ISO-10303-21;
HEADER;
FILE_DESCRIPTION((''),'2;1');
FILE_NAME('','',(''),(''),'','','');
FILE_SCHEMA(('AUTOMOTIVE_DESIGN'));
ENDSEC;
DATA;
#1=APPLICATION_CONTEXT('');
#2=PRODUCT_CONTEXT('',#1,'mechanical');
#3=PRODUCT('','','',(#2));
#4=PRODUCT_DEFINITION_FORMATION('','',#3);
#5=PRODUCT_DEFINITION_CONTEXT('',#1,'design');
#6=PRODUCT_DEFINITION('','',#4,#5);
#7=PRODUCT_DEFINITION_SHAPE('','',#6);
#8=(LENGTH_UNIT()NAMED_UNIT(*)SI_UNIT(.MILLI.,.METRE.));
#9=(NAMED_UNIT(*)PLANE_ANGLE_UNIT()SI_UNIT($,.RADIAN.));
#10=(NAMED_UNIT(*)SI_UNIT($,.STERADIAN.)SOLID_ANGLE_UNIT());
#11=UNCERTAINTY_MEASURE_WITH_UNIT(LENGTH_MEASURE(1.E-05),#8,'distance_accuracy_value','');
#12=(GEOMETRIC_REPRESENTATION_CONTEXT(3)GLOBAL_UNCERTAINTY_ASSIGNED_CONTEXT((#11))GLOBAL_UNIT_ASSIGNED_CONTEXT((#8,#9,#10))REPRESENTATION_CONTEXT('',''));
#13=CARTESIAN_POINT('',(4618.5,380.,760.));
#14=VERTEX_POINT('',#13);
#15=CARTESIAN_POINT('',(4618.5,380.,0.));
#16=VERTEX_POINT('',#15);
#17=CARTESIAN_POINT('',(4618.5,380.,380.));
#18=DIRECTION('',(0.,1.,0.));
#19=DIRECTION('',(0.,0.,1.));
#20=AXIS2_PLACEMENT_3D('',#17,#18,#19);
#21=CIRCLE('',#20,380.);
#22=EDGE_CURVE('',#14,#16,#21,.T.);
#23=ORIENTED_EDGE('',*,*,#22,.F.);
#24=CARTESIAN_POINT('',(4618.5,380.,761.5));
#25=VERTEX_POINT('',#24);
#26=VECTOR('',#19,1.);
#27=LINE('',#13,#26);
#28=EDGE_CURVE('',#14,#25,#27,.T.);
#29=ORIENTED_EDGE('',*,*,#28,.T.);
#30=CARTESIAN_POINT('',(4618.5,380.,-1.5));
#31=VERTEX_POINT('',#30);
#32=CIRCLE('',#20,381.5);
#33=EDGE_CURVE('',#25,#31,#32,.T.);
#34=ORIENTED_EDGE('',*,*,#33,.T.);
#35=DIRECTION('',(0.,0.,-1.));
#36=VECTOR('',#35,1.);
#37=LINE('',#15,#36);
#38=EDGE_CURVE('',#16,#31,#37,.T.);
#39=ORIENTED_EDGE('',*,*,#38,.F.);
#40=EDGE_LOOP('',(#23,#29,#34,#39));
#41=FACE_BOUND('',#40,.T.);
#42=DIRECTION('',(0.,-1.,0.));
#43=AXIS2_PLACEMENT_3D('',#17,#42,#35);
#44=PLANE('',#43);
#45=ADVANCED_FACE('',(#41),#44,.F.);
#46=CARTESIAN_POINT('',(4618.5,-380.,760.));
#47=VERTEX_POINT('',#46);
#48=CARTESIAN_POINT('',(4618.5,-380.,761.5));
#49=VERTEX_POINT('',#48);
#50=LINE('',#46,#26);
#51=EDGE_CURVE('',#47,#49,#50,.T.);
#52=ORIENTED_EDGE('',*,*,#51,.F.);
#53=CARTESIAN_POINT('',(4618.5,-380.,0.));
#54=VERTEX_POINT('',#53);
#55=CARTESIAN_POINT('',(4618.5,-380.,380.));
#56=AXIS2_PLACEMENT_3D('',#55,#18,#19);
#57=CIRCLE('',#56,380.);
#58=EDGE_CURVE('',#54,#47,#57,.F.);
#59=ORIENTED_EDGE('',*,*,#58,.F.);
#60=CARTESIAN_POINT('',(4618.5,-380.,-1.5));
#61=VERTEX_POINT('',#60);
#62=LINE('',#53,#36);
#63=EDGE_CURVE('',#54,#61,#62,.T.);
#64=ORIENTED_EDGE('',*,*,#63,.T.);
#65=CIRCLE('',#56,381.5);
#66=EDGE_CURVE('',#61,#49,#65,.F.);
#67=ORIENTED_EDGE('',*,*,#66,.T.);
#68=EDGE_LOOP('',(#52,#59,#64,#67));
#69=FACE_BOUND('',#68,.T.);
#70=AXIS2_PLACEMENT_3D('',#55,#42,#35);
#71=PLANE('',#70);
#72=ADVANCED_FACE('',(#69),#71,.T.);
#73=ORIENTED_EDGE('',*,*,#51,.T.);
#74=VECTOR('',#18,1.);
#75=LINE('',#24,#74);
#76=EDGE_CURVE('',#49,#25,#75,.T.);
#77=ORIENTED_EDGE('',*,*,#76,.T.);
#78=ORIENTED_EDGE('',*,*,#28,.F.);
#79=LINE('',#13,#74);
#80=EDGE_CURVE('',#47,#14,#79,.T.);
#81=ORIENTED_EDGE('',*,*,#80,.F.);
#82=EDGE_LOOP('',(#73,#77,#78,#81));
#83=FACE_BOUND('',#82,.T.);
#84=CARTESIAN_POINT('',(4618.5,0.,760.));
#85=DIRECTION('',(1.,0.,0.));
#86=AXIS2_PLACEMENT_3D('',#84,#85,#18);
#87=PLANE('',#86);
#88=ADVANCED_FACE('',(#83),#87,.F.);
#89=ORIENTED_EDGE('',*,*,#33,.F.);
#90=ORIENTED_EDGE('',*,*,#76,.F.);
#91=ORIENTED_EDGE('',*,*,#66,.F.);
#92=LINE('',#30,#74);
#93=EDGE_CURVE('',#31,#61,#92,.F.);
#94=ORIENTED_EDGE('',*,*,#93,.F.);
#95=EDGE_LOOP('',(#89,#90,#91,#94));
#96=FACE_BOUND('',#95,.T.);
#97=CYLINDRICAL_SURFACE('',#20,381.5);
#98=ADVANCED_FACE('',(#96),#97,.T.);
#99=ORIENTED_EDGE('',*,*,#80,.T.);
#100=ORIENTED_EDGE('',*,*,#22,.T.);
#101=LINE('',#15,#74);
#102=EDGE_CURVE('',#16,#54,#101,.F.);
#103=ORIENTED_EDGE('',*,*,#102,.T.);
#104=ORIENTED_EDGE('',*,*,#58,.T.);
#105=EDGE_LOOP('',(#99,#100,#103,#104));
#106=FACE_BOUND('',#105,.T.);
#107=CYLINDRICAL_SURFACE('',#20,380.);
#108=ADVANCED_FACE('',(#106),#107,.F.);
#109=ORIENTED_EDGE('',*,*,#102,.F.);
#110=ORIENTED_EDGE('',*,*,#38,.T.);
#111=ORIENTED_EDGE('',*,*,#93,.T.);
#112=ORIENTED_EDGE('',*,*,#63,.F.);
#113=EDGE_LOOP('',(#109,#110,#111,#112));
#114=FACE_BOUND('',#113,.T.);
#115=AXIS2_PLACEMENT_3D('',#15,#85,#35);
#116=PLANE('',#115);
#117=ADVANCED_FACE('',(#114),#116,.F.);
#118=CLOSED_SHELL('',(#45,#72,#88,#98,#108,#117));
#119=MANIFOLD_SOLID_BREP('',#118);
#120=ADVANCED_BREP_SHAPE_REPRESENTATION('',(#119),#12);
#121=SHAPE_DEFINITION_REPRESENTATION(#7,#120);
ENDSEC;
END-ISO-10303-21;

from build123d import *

# Parameters (mm, degrees)
SKETCH1_W          = 10000
SKETCH1_H          = 760
BASE_FLANGE1_DEPTH = 1.5
HEM2_START         = -380
HEM2_DEPTH         = 760
HEM2_2_DEPTH       = 760
SKETCH17_W         = 11222.895029189
SKETCH17_H         = 1018.315302658
CUT_EXTRUDE2_DEPTH = 5115.438605556


# Read off the part's stored shape, not the designer's step: Hem2
# Sheet-metal steps are written as plain solids
with BuildPart() as part:
    # Sketch1 → Base-Flange1 (new body)
    with BuildSketch(Plane.XY):
        Rectangle(SKETCH1_W, SKETCH1_H)
    extrude(amount=-BASE_FLANGE1_DEPTH)

    # Hem2 outline → Hem2 (cut)
    with BuildSketch(Plane(origin=(0, 0, 0), x_dir=(1, 0, 0), z_dir=(0, 1, 0)).offset(HEM2_START)):
        with BuildLine():
            ThreePointArc((4618.5, 1.5), (4635.415229824, 1.124815513), (4652.297189232, 0))
            Line((4652.297189232, 0), (5000, 0))
            Line((5000, 0), (5000, 1.5))
            Line((5000, 1.5), (4618.5, 1.5))
        make_face()
    extrude(amount=HEM2_DEPTH, mode=Mode.SUBTRACT)

    # Hem2 2 outline → Hem2 2 (add)
    with BuildSketch(Plane(origin=(0, 0, 0), x_dir=(1, 0, 0), z_dir=(0, 1, 0)).offset(HEM2_START)):
        with BuildLine():
            Line((4618.5, -760), (4618.5, -761.5))
            ThreePointArc((4618.5, -761.5), (4999.624815513, -396.915229824), (4652.297189232, 0))
            Line((4652.297189232, 0), (4618.5, 0))
            ThreePointArc((4618.5, 0), (4998.5, -380), (4618.5, -760))
        make_face()
    extrude(amount=HEM2_2_DEPTH)

    # Sketch17 → Cut-Extrude2 (cut, through all)
    with BuildSketch(Plane.XZ.offset(380)):
        with Locations((-992.947514595, -509.157651329)):
            Rectangle(SKETCH17_W, SKETCH17_H)
    extrude(amount=-CUT_EXTRUDE2_DEPTH, mode=Mode.SUBTRACT)


solid = part.part
